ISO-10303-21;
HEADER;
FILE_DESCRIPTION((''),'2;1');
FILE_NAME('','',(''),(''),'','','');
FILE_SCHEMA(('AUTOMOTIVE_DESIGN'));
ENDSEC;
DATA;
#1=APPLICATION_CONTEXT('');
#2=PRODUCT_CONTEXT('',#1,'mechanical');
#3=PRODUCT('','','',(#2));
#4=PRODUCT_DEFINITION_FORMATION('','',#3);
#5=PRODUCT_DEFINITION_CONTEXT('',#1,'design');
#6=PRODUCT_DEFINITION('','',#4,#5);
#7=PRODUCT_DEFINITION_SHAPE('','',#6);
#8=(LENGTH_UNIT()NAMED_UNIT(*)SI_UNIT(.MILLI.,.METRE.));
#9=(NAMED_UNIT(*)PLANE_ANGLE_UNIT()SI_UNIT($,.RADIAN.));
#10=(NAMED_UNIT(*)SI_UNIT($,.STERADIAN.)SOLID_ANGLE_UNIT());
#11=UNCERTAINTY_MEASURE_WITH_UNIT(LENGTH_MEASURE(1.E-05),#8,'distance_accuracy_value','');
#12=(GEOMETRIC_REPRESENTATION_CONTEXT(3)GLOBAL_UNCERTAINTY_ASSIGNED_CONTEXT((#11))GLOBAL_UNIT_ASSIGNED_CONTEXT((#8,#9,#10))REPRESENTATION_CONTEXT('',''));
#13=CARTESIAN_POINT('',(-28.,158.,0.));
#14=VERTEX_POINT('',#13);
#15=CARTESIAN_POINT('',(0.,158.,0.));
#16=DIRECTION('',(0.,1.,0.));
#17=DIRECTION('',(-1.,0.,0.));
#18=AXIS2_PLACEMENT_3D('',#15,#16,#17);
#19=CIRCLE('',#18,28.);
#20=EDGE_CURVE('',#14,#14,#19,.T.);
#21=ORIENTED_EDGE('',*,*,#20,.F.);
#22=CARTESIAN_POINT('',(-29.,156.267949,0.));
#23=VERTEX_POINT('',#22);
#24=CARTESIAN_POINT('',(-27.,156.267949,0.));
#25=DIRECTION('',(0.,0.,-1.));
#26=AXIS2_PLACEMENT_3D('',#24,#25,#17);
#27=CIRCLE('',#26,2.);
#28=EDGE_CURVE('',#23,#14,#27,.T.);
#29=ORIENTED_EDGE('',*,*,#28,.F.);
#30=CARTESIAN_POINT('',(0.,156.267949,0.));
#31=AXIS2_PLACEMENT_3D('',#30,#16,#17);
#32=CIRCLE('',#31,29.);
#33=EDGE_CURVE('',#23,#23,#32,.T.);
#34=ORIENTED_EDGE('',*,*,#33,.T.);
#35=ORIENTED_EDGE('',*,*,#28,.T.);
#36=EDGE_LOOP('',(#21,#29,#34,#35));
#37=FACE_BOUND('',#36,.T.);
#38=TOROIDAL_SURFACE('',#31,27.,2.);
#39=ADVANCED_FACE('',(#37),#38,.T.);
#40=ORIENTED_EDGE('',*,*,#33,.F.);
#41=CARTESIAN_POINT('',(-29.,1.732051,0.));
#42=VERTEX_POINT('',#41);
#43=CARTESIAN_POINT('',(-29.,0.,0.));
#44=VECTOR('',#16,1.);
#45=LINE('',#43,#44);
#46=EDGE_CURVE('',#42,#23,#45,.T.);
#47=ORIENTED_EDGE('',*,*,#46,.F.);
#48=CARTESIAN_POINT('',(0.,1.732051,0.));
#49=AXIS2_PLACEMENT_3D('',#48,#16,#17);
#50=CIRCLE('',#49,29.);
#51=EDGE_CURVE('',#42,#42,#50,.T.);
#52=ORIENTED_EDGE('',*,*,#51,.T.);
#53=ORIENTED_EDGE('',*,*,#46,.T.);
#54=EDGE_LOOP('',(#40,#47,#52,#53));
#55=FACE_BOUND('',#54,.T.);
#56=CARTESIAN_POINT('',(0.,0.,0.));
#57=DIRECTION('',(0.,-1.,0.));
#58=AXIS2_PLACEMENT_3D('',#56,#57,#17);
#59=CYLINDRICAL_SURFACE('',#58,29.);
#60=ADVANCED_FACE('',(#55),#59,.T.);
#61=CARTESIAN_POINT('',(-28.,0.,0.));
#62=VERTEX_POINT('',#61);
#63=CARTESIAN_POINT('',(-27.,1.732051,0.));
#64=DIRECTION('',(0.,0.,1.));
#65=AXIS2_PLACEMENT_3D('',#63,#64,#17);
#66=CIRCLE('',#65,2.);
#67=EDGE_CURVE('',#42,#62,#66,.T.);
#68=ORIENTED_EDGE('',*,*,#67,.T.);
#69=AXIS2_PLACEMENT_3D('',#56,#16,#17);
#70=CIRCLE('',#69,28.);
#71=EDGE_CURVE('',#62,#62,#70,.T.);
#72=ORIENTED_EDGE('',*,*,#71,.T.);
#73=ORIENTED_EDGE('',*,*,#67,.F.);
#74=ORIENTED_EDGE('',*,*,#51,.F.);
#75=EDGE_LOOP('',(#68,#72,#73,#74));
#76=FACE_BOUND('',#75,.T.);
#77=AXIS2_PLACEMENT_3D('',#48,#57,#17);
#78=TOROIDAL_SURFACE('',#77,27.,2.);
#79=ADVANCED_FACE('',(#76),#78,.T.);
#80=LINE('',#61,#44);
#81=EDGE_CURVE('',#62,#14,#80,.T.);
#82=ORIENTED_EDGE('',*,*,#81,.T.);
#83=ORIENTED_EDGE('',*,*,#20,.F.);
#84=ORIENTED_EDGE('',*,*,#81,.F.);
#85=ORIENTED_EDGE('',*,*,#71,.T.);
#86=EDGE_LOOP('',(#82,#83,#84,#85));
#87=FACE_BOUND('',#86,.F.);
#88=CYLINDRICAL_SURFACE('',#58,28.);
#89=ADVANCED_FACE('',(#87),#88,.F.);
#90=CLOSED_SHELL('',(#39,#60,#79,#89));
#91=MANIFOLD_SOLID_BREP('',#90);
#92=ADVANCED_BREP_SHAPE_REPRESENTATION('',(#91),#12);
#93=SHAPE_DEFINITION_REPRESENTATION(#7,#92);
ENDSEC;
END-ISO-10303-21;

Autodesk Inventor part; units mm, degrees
ref_plane "YZ Plane" through (0, 0, 0) normal (1, 0, 0) x (0, 1, 0)
ref_plane "XZ Plane" through (0, 0, 0) normal (0, 1, 0) x (-1, 0, 0)
ref_plane "XY Plane" through (0, 0, 0) normal (0, 0, 1) x (1, 0, 0)
sketch "Sketch2" plane through (0, 0, 0) normal (0, 1, 0) x (-1, 0, 0)
  circle A0 centre (0, 0) radius 29
  circle A1 centre (0, 0) radius 28
  dimension "d14" = 58
  dimension "d15" = 56
extrude "Extrusion2" add sketch "Sketch2" along normal blind 158
fillet "Fillet1" radius 2 1 edges at (29, 0, 0)
fillet "Fillet2" radius 2 1 edges at (29, 158, 0)
properties part number "snow_can_middle"
